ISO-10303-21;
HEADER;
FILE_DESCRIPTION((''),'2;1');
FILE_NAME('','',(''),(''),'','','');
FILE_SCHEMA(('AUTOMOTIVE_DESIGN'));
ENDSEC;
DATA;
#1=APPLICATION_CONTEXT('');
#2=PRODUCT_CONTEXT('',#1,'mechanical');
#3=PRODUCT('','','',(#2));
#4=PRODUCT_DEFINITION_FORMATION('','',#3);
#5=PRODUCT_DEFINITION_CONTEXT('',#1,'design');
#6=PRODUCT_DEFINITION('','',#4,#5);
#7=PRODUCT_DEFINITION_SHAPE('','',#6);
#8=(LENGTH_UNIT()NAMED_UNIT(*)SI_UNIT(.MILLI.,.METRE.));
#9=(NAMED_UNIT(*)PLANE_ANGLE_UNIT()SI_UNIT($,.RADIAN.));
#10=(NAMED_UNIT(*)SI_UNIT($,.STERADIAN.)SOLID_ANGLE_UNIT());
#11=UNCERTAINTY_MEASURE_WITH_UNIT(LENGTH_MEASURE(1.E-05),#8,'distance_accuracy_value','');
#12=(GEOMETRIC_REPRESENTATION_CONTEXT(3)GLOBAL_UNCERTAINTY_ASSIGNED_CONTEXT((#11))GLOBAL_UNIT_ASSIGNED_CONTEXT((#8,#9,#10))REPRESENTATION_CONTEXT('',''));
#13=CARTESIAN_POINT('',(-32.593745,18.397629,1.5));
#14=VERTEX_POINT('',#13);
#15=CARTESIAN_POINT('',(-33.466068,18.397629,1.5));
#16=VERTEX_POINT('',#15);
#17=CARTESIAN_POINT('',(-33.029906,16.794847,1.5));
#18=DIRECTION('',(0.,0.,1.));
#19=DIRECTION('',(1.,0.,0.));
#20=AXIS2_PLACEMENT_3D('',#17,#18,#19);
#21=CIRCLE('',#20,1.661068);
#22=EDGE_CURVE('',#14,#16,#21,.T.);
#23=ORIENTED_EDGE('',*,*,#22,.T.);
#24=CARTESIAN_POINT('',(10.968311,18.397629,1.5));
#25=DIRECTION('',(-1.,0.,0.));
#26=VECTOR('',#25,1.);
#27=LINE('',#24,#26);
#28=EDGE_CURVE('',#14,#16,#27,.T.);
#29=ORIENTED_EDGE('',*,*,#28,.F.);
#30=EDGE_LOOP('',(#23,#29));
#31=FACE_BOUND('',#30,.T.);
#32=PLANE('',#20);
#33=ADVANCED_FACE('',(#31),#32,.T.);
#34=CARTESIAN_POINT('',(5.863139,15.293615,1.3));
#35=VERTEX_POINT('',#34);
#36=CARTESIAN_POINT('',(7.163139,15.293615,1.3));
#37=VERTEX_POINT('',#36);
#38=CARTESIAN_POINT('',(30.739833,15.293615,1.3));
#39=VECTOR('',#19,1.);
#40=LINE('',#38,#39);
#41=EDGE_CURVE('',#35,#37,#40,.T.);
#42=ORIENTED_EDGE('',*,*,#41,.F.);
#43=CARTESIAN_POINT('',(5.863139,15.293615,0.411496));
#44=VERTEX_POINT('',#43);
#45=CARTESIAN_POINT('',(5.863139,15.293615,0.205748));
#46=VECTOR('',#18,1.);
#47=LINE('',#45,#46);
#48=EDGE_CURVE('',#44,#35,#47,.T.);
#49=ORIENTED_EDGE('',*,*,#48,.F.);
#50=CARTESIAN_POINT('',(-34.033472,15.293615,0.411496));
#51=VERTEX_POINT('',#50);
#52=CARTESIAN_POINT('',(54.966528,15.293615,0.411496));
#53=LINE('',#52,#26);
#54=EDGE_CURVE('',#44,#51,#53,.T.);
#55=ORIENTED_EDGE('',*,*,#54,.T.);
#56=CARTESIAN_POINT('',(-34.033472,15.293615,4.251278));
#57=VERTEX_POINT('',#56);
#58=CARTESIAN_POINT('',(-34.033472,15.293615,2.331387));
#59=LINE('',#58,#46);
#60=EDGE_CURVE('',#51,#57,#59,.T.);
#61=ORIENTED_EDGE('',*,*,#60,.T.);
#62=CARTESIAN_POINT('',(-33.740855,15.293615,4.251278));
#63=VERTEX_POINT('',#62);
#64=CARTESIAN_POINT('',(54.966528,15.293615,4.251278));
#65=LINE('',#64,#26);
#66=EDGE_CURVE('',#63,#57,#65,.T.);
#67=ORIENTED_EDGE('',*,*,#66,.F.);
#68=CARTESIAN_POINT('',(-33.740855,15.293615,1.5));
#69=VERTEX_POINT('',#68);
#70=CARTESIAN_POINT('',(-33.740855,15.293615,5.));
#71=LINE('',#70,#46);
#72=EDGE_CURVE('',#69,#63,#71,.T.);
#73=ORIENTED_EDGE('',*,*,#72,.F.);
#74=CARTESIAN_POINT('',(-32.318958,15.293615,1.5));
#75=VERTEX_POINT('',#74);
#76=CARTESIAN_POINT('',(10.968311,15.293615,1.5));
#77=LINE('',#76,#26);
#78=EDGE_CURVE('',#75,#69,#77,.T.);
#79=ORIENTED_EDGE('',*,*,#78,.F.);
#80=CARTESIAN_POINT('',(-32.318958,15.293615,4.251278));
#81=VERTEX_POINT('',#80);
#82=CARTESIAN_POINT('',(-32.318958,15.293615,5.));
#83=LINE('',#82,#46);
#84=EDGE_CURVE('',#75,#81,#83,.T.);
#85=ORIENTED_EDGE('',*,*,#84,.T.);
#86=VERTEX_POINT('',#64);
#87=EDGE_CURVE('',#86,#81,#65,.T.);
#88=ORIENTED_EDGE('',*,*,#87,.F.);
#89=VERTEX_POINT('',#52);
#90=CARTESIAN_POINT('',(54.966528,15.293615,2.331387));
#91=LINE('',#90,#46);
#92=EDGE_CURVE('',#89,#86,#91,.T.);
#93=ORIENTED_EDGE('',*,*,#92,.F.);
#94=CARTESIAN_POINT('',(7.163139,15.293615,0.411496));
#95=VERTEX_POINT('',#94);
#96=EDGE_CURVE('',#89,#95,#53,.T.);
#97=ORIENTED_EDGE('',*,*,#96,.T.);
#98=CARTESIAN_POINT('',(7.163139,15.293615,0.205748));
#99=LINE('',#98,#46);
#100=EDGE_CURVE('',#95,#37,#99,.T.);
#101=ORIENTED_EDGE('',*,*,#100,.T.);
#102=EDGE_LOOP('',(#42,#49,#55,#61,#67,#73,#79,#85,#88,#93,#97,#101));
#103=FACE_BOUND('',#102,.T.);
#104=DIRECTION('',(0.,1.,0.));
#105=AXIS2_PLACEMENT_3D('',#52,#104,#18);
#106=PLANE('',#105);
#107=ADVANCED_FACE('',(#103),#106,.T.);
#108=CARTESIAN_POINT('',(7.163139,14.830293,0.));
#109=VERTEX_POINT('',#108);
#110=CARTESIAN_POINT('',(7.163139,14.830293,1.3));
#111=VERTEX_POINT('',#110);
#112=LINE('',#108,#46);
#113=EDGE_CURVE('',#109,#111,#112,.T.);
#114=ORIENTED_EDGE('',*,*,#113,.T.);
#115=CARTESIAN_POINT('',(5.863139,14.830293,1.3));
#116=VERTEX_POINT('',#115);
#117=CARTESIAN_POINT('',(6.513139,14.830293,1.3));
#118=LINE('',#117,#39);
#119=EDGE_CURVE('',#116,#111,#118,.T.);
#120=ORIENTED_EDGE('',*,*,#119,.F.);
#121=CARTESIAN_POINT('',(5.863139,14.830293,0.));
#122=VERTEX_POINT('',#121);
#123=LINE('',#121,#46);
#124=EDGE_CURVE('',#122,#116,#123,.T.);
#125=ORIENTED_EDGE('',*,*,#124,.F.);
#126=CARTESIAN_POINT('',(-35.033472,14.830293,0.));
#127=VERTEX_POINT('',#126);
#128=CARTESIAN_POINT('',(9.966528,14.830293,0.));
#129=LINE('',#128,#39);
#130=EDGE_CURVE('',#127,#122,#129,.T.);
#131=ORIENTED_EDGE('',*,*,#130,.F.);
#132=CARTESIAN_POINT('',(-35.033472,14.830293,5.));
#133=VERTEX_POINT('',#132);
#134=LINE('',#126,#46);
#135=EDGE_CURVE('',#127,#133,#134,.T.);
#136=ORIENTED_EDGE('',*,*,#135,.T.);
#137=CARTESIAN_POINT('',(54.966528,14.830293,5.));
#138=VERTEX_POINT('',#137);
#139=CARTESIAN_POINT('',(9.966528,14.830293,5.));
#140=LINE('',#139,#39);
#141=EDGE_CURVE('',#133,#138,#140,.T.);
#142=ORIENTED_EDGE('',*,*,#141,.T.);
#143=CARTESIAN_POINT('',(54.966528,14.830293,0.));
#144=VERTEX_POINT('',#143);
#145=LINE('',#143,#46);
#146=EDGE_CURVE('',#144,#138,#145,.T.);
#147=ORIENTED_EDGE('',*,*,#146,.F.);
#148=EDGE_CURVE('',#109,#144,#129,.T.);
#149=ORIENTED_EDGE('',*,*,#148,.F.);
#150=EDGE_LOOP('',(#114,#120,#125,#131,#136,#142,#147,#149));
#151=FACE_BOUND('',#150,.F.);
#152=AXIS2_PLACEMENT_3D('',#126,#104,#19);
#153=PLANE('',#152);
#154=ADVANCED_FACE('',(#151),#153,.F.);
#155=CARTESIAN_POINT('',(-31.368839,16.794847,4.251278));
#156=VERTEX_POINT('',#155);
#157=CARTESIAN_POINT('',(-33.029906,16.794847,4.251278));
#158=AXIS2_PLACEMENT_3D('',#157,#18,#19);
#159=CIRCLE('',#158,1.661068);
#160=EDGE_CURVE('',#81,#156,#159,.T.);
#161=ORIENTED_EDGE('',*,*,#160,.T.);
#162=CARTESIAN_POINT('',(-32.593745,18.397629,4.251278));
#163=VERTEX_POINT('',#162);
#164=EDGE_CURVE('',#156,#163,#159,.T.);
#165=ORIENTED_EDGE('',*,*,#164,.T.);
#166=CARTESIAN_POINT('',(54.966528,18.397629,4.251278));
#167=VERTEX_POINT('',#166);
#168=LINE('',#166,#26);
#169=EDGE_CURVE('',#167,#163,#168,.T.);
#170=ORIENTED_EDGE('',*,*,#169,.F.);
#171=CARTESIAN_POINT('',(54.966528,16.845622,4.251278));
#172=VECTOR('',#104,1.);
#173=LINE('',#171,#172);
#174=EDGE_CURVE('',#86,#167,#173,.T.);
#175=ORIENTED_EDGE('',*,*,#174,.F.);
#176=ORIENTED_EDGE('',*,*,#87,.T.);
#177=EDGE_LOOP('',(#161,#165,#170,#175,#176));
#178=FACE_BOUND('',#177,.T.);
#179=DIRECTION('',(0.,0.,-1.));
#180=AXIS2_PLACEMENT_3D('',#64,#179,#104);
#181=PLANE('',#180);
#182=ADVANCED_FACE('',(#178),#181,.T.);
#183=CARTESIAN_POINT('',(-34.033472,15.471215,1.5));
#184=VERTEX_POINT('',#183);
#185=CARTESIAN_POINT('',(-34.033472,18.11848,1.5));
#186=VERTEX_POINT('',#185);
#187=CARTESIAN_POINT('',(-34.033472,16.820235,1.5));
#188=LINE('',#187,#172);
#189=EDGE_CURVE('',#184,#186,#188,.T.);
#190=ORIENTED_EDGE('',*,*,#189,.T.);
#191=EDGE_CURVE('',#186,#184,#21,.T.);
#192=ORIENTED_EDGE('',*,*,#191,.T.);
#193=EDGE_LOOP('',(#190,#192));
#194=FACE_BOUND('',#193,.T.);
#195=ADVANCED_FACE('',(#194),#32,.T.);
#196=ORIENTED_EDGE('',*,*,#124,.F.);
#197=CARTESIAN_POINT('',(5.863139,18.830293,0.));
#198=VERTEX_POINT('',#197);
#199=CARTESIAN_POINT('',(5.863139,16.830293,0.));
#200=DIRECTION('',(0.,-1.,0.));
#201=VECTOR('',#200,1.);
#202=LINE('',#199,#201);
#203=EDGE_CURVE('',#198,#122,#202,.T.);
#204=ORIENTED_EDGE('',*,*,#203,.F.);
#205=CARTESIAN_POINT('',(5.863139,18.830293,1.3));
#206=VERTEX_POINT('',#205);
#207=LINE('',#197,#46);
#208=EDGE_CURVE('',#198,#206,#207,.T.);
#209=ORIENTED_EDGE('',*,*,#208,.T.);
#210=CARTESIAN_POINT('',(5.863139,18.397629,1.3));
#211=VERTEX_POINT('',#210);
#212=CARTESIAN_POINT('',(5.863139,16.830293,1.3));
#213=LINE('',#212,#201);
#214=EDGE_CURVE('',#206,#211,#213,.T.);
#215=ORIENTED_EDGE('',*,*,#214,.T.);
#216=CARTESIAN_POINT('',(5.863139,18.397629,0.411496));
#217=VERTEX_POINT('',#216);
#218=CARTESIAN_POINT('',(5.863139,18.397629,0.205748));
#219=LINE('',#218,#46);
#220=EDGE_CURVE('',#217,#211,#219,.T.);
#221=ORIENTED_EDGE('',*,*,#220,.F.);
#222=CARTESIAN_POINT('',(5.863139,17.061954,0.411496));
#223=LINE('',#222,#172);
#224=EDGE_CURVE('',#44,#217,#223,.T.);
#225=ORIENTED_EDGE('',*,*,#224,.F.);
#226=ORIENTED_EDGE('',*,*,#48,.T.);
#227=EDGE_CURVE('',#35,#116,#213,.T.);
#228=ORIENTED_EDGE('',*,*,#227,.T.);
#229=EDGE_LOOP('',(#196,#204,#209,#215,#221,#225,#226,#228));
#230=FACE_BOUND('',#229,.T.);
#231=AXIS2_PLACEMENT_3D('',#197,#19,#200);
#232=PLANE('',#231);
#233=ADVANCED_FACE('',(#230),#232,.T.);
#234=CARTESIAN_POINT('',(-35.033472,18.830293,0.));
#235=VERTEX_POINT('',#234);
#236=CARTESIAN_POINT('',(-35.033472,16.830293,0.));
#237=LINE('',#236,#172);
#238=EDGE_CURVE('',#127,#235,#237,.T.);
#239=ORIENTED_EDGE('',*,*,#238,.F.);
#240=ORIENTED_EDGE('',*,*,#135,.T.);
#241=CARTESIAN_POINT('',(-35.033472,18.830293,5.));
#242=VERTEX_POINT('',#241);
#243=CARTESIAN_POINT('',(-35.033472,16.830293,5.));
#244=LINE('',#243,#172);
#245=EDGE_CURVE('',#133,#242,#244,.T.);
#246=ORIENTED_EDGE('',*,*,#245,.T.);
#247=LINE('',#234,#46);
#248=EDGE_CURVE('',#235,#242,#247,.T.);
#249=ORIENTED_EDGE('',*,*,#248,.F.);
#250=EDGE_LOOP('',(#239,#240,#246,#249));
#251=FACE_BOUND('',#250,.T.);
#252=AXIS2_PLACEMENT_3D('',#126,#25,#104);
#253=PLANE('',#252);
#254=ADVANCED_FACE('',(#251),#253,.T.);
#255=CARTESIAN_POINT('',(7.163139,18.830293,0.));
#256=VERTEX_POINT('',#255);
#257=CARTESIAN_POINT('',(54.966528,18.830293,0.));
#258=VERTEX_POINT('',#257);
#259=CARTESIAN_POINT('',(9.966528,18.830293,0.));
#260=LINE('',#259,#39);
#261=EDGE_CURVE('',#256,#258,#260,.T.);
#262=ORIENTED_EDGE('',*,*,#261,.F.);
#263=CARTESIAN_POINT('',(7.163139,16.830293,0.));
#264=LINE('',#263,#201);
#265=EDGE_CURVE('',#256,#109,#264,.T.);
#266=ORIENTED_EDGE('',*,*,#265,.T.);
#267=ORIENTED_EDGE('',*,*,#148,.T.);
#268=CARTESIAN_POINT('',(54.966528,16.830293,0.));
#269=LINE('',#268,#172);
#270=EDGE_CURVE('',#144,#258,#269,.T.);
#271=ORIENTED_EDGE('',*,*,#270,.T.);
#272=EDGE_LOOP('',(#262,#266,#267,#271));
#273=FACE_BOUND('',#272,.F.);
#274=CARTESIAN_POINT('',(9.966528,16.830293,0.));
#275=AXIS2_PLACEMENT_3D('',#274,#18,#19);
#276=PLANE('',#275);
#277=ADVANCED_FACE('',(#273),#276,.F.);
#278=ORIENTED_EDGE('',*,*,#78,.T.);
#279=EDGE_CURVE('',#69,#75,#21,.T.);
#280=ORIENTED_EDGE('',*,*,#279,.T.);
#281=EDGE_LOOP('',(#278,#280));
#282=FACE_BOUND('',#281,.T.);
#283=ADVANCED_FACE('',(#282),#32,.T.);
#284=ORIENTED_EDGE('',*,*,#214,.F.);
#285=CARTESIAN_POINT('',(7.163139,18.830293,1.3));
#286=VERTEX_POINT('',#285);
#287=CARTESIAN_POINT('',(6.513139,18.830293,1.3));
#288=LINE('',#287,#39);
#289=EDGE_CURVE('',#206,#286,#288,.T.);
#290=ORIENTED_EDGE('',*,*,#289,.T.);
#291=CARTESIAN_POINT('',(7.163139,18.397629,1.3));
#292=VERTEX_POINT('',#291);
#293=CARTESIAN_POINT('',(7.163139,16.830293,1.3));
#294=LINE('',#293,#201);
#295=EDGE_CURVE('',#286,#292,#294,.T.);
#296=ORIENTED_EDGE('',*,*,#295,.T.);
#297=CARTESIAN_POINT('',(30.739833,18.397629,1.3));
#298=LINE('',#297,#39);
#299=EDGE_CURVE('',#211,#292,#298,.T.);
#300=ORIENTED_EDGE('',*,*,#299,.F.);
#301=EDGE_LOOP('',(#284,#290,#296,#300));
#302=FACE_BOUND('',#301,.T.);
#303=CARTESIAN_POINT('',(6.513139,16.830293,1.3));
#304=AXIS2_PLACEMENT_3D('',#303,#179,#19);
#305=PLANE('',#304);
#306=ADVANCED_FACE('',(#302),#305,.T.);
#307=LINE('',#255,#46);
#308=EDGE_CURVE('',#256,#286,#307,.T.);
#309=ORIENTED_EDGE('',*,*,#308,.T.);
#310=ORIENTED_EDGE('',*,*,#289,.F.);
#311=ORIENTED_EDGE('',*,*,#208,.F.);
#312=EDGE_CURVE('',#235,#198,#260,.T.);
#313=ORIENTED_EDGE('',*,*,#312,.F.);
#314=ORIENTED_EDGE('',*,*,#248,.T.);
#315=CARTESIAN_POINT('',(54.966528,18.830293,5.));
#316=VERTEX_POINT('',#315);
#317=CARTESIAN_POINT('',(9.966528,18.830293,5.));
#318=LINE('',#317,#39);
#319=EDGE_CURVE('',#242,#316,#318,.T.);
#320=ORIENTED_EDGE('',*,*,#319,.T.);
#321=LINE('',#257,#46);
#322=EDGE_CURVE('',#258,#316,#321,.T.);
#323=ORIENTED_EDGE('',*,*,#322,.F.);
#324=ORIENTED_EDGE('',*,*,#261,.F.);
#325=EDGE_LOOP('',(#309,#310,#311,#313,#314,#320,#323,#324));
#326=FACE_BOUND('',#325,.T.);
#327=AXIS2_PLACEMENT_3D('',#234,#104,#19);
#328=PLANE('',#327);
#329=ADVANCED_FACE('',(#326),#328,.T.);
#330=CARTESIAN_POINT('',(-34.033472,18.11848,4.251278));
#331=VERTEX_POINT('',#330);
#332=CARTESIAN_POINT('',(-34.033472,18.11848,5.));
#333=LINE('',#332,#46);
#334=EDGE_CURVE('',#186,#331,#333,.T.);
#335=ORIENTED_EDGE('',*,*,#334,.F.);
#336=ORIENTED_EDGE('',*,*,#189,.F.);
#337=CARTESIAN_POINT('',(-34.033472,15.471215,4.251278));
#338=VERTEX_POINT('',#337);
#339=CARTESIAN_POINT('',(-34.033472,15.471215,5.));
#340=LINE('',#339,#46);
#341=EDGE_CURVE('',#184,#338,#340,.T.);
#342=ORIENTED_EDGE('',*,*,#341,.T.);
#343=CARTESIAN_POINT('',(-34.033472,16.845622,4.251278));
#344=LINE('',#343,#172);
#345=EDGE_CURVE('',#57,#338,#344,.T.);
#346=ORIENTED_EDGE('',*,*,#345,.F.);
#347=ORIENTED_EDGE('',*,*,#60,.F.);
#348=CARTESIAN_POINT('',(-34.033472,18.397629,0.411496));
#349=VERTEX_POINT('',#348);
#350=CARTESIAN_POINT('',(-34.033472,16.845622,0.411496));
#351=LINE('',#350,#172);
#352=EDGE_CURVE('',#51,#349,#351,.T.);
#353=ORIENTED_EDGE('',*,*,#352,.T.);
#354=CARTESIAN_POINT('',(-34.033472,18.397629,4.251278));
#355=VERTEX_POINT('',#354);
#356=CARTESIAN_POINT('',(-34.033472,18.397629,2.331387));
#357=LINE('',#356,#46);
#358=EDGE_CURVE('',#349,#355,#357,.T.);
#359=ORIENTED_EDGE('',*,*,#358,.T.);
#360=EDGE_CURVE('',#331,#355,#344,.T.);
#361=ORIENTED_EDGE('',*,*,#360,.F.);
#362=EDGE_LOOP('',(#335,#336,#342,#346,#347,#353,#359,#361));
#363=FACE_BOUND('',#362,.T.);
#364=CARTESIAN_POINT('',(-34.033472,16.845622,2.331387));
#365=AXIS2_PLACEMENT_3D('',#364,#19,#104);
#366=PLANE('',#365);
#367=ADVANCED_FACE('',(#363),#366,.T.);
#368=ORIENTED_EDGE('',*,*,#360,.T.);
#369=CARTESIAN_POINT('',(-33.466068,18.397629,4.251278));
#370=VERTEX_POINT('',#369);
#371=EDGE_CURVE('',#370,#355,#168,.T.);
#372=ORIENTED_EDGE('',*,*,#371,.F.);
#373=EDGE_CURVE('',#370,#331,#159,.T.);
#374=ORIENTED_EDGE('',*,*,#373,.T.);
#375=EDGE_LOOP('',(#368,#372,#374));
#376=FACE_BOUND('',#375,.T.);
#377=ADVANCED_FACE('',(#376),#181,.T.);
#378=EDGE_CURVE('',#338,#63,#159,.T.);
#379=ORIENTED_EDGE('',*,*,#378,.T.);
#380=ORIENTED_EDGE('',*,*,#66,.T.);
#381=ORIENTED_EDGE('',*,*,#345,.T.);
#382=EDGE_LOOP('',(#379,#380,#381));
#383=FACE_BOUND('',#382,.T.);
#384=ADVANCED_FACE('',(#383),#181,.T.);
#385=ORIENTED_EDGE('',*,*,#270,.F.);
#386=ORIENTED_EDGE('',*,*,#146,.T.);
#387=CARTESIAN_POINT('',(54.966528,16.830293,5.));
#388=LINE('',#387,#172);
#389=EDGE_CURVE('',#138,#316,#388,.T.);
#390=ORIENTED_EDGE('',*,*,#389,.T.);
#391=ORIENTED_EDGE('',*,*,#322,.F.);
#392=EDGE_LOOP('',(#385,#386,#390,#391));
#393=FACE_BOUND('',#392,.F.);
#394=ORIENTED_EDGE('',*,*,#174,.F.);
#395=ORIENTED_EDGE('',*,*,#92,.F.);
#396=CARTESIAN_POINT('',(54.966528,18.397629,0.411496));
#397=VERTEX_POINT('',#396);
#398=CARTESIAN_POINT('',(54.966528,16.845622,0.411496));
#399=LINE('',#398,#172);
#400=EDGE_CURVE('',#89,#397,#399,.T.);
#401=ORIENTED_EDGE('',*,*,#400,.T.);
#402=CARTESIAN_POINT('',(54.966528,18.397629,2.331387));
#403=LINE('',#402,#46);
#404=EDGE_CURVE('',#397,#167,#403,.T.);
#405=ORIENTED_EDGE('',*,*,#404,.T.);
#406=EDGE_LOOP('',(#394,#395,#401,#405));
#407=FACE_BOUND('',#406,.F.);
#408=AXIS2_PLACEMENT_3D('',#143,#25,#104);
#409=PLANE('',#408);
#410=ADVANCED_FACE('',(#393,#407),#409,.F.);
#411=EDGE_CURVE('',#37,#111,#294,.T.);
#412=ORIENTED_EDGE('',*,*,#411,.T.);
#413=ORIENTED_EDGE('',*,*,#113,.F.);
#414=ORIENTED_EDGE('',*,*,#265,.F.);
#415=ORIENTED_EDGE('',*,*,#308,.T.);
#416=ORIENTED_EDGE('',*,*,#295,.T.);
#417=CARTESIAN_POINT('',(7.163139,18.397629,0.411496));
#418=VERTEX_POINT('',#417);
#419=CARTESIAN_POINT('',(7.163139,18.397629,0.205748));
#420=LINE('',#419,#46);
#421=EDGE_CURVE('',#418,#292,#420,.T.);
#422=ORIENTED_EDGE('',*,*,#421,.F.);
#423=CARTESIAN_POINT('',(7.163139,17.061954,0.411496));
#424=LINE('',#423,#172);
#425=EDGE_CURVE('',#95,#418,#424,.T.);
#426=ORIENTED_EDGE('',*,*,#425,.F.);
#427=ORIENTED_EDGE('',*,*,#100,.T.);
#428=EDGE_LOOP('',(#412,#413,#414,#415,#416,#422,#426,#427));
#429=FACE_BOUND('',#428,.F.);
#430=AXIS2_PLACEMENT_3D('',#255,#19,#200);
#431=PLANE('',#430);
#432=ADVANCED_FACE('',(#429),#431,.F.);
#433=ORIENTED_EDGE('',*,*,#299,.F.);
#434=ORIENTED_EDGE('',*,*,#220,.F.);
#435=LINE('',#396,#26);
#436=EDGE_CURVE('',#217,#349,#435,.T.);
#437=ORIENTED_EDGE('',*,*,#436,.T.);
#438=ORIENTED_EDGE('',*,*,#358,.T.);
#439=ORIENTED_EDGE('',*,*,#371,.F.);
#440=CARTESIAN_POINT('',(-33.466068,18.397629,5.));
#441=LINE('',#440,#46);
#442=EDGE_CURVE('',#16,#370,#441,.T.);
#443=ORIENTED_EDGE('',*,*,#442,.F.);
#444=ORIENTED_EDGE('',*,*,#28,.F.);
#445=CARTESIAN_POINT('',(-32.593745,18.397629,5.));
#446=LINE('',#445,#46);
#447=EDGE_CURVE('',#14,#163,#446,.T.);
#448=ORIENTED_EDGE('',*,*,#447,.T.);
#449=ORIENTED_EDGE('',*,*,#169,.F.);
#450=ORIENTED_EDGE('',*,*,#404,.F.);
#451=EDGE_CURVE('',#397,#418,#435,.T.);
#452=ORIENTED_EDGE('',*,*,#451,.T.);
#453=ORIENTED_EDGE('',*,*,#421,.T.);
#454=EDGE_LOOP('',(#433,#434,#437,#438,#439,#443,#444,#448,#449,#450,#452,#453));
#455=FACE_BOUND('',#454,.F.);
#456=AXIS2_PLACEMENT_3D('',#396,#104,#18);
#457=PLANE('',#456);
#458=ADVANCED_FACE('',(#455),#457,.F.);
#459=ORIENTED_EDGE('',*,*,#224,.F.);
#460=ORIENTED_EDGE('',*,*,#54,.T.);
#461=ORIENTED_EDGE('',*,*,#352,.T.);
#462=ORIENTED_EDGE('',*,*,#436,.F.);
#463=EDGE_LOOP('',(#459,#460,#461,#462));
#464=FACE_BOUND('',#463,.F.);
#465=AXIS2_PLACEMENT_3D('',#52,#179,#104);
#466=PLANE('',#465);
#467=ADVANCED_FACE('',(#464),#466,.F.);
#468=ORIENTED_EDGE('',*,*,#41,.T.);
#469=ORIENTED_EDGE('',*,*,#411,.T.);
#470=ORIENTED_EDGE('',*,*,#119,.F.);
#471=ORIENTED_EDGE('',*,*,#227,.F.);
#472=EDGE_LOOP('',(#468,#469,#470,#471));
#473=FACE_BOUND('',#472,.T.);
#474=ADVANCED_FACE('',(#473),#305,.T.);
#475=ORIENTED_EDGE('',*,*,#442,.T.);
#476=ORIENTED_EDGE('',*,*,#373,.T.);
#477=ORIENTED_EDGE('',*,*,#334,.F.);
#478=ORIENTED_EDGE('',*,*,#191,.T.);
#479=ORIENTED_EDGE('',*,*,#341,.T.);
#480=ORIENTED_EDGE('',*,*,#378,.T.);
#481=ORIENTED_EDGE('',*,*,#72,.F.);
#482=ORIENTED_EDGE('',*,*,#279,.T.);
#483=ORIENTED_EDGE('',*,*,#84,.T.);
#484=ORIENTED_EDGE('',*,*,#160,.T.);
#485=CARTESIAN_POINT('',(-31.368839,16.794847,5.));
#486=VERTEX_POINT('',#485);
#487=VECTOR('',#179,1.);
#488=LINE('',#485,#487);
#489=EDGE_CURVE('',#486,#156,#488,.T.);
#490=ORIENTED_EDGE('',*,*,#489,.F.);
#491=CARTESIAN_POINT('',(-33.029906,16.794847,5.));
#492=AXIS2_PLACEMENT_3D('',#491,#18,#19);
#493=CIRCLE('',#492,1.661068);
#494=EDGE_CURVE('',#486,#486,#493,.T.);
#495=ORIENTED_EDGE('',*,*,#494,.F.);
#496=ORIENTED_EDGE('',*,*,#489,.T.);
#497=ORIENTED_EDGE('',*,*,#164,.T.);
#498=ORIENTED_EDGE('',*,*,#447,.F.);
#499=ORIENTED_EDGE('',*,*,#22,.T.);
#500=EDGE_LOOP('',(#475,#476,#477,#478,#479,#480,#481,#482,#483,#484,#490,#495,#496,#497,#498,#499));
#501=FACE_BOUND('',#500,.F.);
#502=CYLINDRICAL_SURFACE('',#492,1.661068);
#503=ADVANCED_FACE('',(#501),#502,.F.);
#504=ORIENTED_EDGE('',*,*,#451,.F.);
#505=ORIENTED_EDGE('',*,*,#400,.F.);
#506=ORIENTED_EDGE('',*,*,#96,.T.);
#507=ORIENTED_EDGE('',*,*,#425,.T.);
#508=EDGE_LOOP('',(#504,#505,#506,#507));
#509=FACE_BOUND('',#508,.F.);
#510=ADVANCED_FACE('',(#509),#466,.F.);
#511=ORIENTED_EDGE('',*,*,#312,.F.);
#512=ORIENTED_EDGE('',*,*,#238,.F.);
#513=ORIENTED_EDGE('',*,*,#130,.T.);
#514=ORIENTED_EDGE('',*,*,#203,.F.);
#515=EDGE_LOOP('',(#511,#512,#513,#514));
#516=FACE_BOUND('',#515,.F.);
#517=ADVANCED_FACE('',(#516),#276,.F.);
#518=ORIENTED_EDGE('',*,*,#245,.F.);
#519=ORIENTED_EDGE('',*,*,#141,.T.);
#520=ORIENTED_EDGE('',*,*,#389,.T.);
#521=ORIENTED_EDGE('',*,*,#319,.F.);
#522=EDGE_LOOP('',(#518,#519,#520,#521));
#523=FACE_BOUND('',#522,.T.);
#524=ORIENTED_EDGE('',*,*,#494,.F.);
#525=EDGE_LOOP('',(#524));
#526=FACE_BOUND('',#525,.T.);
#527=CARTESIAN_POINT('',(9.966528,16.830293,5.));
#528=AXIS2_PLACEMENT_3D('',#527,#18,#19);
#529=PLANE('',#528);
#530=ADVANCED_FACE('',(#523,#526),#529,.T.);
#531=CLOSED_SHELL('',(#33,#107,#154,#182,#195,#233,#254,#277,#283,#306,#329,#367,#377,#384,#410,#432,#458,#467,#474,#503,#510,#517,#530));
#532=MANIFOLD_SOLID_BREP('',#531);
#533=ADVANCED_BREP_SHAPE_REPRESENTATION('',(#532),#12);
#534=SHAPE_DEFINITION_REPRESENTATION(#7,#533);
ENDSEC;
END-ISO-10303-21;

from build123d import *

# Parameters (mm, degrees)
F0_W     = 90
F0_H     = 4
F1_DEPTH = 5
F2_R     = 1.661067913
F3_DEPTH = 3.5
F6_W     = 1.3
F6_H     = 4
F7_DEPTH = 1.3
F8_W     = 3.1040143222
F8_H     = 3.8397812168
F9_DEPTH = 89


# Not quite as in the source:
# - the program builds the solid bodies; features that only make, move or delete a surface that nothing else refers to are left out


with BuildPart() as f1:
    # F0 (on Top) → F1 (new body)
    with BuildSketch(Plane.XY):
        with Locations((9.9665279686, 16.8302931339)):
            Rectangle(F0_W, F0_H)
    extrude(amount=F1_DEPTH)

    # F2 (on face) → F3 (cut)
    with BuildSketch(Plane.XY.offset(5)):
        with Locations((-33.0299064517, 16.7948473245)):
            Circle(F2_R)
    extrude(amount=-F3_DEPTH, mode=Mode.SUBTRACT)

    # F6 (on face) → F7 (cut)
    with BuildSketch(Plane(origin=(0, 0, 0), x_dir=(1, 0, 0), z_dir=(0, 0, -1))):
        with Locations((6.5131389402, -16.8302931339)):
            Rectangle(F6_W, F6_H)
    extrude(amount=-F7_DEPTH, mode=Mode.SUBTRACT)

    # F8 (on face) → F9 (cut)
    with BuildSketch(Plane.YZ.offset(54.9665279686)):
        with Locations((16.8456220999, 2.3313869315)):
            Rectangle(F8_W, F8_H)
    extrude(amount=-F9_DEPTH, mode=Mode.SUBTRACT)


solid = f1.part
